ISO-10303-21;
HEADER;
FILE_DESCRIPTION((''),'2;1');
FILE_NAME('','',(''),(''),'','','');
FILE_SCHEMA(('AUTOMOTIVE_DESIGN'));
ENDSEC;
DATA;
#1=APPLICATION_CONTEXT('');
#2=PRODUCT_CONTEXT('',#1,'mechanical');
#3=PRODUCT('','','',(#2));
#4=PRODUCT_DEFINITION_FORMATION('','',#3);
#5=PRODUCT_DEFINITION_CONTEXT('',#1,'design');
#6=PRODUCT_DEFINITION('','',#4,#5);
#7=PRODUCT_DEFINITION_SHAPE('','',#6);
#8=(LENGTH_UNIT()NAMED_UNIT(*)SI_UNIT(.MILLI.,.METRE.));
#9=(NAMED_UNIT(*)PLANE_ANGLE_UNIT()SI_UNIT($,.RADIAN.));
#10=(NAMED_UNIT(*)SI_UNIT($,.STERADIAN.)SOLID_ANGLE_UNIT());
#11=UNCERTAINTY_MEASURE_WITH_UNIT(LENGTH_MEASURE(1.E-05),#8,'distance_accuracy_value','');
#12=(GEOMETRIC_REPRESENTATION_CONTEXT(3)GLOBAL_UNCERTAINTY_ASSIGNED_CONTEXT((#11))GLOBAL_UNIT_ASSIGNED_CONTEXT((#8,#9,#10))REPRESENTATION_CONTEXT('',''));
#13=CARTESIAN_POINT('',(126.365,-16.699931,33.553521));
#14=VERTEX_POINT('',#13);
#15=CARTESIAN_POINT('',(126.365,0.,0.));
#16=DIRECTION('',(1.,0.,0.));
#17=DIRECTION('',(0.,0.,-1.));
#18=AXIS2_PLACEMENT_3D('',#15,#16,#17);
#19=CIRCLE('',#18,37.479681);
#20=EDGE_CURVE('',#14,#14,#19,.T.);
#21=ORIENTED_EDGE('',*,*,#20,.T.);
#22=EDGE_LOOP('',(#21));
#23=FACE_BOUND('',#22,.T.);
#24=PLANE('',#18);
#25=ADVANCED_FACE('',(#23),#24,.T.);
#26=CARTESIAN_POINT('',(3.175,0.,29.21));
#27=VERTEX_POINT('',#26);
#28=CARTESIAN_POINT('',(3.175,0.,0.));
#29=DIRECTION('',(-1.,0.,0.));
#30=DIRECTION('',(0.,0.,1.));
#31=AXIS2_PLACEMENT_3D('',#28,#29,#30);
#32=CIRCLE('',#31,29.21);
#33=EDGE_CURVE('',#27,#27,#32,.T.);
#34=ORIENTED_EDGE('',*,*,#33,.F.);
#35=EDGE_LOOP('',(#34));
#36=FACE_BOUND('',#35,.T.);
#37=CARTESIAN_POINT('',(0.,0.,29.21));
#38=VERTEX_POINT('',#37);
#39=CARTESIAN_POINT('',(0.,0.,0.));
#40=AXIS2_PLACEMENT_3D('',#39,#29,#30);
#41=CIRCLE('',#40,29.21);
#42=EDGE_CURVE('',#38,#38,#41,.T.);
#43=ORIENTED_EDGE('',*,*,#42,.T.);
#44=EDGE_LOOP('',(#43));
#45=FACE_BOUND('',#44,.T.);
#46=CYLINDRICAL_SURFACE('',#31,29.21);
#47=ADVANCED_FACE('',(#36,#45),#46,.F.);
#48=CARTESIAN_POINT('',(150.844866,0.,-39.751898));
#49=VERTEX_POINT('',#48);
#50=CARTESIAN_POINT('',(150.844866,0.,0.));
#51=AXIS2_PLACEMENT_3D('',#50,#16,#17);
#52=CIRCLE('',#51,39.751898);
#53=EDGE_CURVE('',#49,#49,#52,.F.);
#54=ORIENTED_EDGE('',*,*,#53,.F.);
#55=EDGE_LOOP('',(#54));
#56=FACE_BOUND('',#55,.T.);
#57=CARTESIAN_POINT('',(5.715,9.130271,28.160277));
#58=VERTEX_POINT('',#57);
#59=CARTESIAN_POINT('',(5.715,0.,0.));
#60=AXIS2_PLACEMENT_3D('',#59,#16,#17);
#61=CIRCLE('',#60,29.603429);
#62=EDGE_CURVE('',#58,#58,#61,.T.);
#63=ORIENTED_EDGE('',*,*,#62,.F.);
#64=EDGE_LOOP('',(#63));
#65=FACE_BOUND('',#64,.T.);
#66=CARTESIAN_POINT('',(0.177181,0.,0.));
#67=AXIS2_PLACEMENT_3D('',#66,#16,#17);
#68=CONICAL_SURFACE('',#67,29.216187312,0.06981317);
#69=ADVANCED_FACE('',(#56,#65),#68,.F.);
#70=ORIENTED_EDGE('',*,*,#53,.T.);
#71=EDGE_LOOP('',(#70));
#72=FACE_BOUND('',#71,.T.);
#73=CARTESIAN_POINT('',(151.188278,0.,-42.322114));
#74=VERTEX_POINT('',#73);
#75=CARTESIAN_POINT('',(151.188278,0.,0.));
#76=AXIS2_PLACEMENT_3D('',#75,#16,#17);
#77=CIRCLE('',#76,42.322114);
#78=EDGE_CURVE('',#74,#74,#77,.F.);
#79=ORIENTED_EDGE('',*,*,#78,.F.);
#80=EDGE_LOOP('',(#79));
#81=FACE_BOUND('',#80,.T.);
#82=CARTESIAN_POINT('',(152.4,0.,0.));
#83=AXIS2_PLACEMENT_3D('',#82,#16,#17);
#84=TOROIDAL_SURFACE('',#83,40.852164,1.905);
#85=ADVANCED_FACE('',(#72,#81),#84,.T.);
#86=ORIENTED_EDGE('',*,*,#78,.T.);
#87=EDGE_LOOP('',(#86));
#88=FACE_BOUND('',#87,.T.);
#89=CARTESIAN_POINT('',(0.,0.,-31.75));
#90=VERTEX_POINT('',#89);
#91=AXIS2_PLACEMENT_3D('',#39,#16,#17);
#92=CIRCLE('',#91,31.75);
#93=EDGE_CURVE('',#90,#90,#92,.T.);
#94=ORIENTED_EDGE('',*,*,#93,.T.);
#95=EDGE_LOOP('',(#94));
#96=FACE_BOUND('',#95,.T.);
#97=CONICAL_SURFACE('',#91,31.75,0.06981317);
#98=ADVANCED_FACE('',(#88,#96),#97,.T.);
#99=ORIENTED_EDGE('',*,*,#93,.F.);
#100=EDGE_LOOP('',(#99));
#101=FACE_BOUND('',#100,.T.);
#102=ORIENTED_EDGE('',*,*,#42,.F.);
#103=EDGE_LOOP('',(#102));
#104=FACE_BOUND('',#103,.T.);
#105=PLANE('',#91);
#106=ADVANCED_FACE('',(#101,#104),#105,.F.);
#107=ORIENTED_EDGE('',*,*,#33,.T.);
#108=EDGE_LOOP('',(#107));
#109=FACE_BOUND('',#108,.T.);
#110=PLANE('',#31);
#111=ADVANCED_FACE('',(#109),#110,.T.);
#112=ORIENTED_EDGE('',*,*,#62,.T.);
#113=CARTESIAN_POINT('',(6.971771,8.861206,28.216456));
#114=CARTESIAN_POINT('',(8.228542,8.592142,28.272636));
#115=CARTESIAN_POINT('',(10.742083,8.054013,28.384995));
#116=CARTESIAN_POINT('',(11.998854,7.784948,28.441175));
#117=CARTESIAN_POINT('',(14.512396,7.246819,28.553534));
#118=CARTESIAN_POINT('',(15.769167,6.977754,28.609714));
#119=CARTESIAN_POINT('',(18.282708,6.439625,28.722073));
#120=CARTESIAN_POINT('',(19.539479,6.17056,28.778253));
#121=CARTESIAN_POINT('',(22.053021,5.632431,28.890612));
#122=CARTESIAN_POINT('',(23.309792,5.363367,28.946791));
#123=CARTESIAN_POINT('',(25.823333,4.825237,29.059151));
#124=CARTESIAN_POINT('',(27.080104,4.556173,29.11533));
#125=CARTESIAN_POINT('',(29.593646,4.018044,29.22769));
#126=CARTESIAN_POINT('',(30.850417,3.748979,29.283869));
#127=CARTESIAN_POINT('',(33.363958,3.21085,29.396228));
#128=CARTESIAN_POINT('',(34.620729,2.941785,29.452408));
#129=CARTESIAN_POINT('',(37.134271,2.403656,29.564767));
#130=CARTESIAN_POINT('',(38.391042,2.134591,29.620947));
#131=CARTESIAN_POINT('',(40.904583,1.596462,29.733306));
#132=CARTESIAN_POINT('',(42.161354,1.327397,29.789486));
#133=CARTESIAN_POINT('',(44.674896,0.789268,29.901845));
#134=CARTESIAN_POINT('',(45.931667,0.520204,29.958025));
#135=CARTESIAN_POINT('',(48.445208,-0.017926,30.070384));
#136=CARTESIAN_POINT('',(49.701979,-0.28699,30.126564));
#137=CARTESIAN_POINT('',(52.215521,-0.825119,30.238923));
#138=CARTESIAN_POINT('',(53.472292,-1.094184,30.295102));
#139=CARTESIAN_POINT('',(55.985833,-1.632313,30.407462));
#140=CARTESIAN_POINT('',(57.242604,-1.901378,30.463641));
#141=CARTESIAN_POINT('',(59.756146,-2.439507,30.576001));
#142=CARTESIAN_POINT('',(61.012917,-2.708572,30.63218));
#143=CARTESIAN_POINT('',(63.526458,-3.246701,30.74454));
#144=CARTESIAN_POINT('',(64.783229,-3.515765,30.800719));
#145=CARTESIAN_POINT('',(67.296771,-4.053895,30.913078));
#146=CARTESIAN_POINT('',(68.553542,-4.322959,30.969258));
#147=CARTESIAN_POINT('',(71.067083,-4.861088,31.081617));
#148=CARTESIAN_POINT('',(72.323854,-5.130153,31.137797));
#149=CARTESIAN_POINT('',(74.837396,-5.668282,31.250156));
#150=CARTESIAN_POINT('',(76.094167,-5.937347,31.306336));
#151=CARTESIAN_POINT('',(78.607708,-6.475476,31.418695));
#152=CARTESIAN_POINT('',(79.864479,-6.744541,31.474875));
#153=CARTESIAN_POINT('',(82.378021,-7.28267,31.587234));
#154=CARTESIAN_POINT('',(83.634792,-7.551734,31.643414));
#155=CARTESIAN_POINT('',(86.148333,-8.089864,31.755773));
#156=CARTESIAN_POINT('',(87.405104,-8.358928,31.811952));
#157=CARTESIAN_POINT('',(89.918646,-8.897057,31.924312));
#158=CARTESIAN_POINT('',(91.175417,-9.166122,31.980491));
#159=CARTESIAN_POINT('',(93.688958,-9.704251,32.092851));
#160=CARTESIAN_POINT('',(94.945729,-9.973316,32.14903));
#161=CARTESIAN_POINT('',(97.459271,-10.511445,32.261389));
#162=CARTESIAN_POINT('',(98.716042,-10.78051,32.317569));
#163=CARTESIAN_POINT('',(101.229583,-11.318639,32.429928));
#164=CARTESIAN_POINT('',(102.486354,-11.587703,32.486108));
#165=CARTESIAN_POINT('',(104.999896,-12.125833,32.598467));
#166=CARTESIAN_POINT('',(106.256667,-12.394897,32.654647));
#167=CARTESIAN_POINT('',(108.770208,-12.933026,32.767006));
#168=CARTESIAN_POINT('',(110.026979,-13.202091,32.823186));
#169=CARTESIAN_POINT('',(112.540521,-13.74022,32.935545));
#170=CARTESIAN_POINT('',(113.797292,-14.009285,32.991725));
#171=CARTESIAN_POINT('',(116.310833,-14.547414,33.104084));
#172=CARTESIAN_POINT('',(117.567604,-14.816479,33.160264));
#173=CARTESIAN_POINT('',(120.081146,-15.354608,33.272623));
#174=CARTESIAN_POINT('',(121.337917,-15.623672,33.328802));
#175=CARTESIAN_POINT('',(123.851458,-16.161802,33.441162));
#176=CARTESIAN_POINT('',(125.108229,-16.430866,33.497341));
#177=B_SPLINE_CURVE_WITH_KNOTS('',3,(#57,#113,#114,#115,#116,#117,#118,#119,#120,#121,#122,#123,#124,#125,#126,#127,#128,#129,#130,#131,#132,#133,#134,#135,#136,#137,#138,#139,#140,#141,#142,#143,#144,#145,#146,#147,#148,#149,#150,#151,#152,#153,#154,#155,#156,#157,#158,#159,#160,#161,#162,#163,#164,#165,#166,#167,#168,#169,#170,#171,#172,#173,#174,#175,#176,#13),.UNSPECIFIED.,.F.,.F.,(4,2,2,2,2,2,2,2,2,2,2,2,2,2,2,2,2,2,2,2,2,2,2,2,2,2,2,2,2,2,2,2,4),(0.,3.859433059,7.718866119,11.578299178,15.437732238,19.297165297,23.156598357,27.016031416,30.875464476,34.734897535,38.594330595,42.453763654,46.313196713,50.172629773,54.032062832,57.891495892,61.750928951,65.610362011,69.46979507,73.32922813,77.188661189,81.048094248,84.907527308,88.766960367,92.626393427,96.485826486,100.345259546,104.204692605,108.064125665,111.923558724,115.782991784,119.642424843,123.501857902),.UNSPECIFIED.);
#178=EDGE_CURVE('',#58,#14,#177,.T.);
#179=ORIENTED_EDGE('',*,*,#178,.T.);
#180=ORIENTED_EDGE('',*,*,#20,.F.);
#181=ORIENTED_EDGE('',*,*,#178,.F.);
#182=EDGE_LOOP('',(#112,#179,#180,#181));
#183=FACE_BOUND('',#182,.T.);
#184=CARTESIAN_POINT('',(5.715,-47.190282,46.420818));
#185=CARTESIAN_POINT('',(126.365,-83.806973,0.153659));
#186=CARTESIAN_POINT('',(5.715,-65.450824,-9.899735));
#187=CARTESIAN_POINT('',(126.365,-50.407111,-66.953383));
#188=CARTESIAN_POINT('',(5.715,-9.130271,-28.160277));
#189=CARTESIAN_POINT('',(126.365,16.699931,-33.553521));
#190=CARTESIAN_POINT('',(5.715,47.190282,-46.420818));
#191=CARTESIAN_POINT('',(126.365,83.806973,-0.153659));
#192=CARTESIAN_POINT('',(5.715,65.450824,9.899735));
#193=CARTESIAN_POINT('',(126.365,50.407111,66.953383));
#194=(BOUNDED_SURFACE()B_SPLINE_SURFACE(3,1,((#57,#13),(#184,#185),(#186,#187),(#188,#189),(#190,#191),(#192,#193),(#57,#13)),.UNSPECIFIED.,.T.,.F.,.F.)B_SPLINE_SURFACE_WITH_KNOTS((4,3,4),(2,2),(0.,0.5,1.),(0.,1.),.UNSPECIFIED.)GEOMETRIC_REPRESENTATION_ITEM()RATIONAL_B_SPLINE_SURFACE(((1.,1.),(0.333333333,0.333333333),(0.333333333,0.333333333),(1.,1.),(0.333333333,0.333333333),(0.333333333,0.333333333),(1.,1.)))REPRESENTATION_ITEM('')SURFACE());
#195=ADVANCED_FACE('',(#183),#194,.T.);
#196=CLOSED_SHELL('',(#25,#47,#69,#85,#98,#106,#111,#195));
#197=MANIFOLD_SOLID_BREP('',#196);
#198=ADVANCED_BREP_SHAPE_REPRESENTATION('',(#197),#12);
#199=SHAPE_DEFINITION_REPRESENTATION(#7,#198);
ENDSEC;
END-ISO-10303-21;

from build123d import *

# Parameters (mm, degrees)
SKETCH1_R           = 31.75
BOSS_EXTRUDE1_DEPTH = 152.4
DRAFT1_ANGLE        = 4
SKETCH3_R           = 29.21
CUT_EXTRUDE1_DEPTH  = 3.175
SHELL2_T            = -2.54
SKETCH4_R           = 1.905


with BuildPart() as part:
    # Sketch1 → Boss-Extrude1 (new body)
    with BuildSketch(Plane(origin=(0, 0, 0), x_dir=(0, 0, -1), z_dir=(1, 0, 0))):
        with Locations(Location((0, 0, 0), (0, 0, 180))):
            Circle(SKETCH1_R)
    extrude(amount=BOSS_EXTRUDE1_DEPTH)

    # Draft1
    draft1_faces = [part.faces().sort_by_distance(p)[0] for p in [
        (76.2, 0, -31.75),
    ]]
    draft(draft1_faces, Plane(origin=(0, 0, 0), x_dir=(0, 0, -1), z_dir=(-1, 0, 0)), DRAFT1_ANGLE)

    # Sketch3 → Cut-Extrude1 (cut)
    with BuildSketch(Plane.ZY):
        Circle(SKETCH3_R)
    extrude(amount=-CUT_EXTRUDE1_DEPTH, mode=Mode.SUBTRACT)

    # Shell2
    shell2_openings = [part.faces().sort_by_distance(p)[0] for p in [
        (152.4, 0, 0),
    ]]
    offset(amount=SHELL2_T, openings=shell2_openings, kind=Kind.INTERSECTION)

    # Sketch4 → Revolve1 (revolve)
    with BuildSketch(Plane(origin=(0, 0, 0), x_dir=(1, 0, 0), z_dir=(0, 1, 0))):
        with Locations((152.4, 40.85216375)):
            Circle(SKETCH4_R)
    revolve(axis=Axis((152.4, 0, 0), (-1, 0, 0)))

    # Loft1: read off the stored shape, not the designer's step
    # Loft1: loft between two sections, ruled curve by curve
    loft1_from = [
        Edge.make_bspline([(5.715, 9.130270928, 28.160276626), (5.715, -47.190282323, 46.420818482), (5.715, -65.45082418, -9.89973477), (5.715, -9.130270928, -28.160276626), (5.715, 47.190282323, -46.420818482), (5.715, 65.45082418, 9.89973477), (5.715, 9.130270928, 28.160276626)], [0, 0, 0, 0, 0.5, 0.5, 0.5, 1, 1, 1, 1], 3, [1, 0.333333333, 0.333333333, 1, 0.333333333, 0.333333333, 1]),
    ]
    loft1_to = [
        Edge.make_bspline([(126.365, -16.699930799, 33.553520927), (126.365, -83.806972652, 0.153659328), (126.365, -50.407111054, -66.953382525), (126.365, 16.699930799, -33.553520927), (126.365, 83.806972652, -0.153659328), (126.365, 50.407111054, 66.953382525), (126.365, -16.699930799, 33.553520927)], [0, 0, 0, 0, 0.5, 0.5, 0.5, 1, 1, 1, 1], 3, [1, 0.333333333, 0.333333333, 1, 0.333333333, 0.333333333, 1]),
    ]
    loft1 = Solid(Shell([*[Face.make_surface_from_curves(loft1_from[k], loft1_to[k]) for k in range(1)], Face(Wire(loft1_from)), Face(Wire(loft1_to))]))
    add(loft1)


solid = part.part
